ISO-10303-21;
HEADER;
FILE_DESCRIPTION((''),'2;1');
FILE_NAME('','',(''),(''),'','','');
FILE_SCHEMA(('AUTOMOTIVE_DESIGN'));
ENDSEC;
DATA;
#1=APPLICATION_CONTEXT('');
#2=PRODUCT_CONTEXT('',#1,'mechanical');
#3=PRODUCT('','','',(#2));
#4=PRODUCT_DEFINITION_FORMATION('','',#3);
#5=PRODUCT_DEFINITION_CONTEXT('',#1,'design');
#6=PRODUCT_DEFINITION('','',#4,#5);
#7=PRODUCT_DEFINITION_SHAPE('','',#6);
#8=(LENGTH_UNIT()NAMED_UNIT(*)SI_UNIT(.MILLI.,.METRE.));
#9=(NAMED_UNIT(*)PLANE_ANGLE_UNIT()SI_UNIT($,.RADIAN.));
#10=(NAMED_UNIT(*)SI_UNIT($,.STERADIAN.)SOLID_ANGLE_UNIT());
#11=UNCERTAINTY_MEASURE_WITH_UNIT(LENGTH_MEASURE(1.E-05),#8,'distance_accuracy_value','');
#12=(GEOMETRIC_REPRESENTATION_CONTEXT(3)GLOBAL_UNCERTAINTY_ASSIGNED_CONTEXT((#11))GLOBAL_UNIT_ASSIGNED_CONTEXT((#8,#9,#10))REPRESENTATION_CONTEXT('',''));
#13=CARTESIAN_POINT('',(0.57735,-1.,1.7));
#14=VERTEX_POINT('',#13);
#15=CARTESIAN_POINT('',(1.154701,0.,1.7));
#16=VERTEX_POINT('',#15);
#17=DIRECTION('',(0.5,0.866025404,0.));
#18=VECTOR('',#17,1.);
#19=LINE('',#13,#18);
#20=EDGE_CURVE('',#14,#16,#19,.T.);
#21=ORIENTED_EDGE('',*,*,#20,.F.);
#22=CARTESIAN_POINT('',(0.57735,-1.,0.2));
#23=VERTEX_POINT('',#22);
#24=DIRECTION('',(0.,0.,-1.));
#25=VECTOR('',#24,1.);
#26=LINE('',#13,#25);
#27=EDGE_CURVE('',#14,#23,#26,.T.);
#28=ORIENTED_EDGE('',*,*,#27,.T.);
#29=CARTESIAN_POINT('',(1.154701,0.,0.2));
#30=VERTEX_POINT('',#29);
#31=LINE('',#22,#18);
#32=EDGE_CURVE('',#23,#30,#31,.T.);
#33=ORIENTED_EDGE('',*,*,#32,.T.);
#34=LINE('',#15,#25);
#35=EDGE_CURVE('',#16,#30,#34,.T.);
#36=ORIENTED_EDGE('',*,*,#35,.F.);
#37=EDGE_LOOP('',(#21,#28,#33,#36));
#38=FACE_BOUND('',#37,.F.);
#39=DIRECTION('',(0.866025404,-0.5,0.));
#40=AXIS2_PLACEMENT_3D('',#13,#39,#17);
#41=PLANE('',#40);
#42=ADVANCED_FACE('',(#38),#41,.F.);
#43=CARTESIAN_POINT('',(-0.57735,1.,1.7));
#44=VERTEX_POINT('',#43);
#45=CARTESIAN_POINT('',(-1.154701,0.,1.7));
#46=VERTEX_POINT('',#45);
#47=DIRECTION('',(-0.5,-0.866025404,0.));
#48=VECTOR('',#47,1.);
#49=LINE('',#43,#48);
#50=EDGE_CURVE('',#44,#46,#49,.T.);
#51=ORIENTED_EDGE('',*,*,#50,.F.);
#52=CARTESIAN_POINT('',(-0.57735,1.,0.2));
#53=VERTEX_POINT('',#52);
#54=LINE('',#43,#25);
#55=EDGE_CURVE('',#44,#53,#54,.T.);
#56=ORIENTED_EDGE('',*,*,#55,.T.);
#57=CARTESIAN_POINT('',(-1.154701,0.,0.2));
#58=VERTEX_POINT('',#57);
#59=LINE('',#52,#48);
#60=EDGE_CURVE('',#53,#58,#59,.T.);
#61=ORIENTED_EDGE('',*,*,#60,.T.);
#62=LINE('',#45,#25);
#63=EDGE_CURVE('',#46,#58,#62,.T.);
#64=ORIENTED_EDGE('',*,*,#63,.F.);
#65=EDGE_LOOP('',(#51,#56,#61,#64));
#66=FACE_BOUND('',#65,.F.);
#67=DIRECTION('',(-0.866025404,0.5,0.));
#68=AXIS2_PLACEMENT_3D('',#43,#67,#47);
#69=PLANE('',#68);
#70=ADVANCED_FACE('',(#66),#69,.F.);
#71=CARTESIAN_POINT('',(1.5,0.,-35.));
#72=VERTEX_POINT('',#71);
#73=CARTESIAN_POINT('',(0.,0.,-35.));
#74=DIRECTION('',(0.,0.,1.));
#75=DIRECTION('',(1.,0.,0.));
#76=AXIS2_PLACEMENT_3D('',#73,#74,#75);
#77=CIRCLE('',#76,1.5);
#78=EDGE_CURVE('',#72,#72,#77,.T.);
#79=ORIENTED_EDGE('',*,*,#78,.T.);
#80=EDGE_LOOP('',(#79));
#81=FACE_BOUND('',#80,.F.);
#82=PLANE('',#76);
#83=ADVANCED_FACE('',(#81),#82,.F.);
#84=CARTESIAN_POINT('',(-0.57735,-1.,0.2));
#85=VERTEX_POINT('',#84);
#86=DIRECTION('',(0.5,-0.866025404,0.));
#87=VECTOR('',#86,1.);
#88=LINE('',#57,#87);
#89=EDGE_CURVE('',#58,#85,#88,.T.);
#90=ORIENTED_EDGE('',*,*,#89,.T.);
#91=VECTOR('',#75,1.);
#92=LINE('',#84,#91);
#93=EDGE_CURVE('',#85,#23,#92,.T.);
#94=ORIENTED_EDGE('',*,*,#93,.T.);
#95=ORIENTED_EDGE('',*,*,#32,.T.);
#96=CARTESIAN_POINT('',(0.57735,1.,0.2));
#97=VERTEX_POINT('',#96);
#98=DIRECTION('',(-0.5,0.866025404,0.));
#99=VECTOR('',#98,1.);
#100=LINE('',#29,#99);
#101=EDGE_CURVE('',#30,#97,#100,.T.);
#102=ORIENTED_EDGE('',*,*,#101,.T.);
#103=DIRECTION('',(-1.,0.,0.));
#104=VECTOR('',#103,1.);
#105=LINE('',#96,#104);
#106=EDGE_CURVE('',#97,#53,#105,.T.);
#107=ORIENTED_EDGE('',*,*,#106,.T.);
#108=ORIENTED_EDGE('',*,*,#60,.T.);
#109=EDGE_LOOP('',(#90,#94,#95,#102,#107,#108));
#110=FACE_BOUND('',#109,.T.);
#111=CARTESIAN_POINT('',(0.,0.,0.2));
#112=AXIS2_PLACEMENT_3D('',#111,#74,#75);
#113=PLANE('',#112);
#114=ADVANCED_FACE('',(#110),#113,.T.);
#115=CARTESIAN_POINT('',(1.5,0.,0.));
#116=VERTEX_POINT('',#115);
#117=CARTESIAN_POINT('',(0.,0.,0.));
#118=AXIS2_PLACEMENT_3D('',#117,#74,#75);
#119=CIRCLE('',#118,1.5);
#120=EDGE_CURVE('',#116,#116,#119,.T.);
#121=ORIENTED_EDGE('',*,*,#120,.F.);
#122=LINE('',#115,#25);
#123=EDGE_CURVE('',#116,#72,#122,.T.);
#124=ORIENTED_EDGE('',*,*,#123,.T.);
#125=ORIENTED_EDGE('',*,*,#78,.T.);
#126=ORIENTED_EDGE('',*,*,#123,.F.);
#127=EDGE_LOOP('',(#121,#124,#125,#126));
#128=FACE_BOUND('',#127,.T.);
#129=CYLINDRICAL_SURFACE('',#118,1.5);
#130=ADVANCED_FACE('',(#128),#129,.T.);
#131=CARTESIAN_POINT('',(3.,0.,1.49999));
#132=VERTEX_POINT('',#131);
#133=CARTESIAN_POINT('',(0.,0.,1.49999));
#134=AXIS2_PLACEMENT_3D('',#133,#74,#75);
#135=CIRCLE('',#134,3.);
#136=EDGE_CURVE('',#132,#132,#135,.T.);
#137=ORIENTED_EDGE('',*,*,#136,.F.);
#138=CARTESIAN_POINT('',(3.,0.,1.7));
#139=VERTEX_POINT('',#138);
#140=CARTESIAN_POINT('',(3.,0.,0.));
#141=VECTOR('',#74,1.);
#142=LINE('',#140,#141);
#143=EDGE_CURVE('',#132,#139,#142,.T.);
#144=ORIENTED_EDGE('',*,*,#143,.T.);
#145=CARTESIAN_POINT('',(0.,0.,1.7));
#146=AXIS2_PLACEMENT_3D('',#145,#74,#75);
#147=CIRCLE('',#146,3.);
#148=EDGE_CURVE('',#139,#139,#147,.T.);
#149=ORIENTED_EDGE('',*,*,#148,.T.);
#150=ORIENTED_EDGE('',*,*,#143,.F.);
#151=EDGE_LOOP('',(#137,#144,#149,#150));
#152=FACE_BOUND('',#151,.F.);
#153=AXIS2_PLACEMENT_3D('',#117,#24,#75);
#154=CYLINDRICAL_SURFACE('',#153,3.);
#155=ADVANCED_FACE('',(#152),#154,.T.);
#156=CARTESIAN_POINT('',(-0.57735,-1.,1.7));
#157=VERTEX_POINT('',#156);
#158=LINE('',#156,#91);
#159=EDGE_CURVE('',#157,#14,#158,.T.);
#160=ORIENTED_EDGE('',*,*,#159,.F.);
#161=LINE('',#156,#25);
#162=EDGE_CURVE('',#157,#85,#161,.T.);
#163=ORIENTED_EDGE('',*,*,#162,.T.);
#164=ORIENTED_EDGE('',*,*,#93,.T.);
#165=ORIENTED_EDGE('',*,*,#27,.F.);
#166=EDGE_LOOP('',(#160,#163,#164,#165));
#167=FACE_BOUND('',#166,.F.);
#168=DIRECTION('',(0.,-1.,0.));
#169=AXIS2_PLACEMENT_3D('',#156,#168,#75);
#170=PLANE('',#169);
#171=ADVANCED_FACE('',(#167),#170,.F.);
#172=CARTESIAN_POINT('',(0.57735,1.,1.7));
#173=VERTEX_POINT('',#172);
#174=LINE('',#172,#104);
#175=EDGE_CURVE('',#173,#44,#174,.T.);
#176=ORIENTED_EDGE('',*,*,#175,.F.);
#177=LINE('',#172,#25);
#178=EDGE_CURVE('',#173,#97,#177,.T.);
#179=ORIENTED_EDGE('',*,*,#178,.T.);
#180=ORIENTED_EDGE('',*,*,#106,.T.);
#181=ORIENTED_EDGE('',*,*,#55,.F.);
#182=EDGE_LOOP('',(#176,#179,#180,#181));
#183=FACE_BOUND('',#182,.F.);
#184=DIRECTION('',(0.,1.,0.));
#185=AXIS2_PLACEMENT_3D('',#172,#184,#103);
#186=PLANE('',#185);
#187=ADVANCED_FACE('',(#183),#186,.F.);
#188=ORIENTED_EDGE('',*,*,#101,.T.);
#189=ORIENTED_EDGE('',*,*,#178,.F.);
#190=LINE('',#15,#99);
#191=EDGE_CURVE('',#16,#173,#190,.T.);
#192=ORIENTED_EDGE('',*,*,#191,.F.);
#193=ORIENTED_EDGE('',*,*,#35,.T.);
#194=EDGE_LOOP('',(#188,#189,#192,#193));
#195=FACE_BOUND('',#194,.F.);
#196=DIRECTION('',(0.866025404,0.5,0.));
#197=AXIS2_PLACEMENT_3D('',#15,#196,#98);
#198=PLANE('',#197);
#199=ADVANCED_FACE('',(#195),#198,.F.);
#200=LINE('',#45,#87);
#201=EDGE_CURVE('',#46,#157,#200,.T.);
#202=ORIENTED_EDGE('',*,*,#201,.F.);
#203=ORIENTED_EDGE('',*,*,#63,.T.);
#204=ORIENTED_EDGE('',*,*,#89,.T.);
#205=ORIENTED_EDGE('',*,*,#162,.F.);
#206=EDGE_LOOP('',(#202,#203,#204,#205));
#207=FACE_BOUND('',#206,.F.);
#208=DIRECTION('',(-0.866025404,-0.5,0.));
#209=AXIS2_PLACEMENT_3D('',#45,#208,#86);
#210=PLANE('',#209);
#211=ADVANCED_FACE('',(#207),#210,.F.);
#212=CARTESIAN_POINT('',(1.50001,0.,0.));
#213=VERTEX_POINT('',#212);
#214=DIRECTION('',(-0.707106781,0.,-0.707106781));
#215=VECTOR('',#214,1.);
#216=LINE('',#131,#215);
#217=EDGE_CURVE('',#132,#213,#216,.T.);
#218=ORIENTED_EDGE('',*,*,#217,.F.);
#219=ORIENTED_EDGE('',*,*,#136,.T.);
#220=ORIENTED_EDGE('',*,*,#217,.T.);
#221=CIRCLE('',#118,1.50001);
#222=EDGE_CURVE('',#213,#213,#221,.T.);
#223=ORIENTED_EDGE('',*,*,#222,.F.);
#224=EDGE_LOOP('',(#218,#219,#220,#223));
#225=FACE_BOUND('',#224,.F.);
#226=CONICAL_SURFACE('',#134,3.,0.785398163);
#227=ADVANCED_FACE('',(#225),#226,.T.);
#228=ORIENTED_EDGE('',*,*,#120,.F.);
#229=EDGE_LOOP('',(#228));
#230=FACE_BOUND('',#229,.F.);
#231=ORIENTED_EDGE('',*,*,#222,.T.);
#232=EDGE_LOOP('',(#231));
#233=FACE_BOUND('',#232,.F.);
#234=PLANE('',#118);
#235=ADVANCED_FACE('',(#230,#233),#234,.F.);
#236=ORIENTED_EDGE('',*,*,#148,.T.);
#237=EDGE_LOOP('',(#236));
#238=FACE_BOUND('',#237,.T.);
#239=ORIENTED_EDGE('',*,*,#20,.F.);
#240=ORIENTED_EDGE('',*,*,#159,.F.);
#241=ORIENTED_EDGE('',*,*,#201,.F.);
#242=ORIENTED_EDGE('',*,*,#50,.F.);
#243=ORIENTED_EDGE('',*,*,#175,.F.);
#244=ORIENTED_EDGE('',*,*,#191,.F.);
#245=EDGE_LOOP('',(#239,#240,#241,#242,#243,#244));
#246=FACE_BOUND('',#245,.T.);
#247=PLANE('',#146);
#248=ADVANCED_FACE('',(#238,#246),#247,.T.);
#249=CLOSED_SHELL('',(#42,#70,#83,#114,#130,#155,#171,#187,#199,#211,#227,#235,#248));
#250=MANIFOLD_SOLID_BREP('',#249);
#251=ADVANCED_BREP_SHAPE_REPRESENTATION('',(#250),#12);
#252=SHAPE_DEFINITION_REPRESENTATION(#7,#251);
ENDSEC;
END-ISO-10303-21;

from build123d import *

# Parameters (mm, degrees)
F0_R     = 1.5
F1_DEPTH = 35
F0_R_2   = 3
F2_DEPTH = 1.7
F4_DEPTH = 1.5
F5_SIZE  = 1.49999


# Not quite as in the source:
# - a fillet or chamfer is up to 0.001 mm smaller than in the source, because OpenCascade refuses the exact size


with BuildPart() as f1:
    # F0 (on Top) → F1 (new body)
    with BuildSketch(Plane.XY):
        Circle(F0_R)
    extrude(amount=-F1_DEPTH)

    # F0 (on Top) → F2 (join)
    with BuildSketch(Plane.XY):
        Circle(F0_R_2)
        Circle(F0_R, mode=Mode.SUBTRACT)
        Circle(F0_R)
    extrude(amount=F2_DEPTH)

    # F3 (on face) → F4 (cut)
    with BuildSketch(Plane.XY.offset(1.7)):
        Polygon((-0.5773502692, -1), (0.5773502692, -1), (1.1547005384, 0), (0.5773502692, 1), (-0.5773502692, 1), (-1.1547005384, 0), align=None)
    extrude(amount=-F4_DEPTH, mode=Mode.SUBTRACT)

    # F5 (size 1.5 in the source; OpenCascade refuses exactly that, so slightly less here)
    f5_edges = [f1.edges().sort_by_distance(p)[0] for p in [
        (-3, 0, 0),
    ]]
    chamfer(f5_edges, length=F5_SIZE)


solid = f1.part
